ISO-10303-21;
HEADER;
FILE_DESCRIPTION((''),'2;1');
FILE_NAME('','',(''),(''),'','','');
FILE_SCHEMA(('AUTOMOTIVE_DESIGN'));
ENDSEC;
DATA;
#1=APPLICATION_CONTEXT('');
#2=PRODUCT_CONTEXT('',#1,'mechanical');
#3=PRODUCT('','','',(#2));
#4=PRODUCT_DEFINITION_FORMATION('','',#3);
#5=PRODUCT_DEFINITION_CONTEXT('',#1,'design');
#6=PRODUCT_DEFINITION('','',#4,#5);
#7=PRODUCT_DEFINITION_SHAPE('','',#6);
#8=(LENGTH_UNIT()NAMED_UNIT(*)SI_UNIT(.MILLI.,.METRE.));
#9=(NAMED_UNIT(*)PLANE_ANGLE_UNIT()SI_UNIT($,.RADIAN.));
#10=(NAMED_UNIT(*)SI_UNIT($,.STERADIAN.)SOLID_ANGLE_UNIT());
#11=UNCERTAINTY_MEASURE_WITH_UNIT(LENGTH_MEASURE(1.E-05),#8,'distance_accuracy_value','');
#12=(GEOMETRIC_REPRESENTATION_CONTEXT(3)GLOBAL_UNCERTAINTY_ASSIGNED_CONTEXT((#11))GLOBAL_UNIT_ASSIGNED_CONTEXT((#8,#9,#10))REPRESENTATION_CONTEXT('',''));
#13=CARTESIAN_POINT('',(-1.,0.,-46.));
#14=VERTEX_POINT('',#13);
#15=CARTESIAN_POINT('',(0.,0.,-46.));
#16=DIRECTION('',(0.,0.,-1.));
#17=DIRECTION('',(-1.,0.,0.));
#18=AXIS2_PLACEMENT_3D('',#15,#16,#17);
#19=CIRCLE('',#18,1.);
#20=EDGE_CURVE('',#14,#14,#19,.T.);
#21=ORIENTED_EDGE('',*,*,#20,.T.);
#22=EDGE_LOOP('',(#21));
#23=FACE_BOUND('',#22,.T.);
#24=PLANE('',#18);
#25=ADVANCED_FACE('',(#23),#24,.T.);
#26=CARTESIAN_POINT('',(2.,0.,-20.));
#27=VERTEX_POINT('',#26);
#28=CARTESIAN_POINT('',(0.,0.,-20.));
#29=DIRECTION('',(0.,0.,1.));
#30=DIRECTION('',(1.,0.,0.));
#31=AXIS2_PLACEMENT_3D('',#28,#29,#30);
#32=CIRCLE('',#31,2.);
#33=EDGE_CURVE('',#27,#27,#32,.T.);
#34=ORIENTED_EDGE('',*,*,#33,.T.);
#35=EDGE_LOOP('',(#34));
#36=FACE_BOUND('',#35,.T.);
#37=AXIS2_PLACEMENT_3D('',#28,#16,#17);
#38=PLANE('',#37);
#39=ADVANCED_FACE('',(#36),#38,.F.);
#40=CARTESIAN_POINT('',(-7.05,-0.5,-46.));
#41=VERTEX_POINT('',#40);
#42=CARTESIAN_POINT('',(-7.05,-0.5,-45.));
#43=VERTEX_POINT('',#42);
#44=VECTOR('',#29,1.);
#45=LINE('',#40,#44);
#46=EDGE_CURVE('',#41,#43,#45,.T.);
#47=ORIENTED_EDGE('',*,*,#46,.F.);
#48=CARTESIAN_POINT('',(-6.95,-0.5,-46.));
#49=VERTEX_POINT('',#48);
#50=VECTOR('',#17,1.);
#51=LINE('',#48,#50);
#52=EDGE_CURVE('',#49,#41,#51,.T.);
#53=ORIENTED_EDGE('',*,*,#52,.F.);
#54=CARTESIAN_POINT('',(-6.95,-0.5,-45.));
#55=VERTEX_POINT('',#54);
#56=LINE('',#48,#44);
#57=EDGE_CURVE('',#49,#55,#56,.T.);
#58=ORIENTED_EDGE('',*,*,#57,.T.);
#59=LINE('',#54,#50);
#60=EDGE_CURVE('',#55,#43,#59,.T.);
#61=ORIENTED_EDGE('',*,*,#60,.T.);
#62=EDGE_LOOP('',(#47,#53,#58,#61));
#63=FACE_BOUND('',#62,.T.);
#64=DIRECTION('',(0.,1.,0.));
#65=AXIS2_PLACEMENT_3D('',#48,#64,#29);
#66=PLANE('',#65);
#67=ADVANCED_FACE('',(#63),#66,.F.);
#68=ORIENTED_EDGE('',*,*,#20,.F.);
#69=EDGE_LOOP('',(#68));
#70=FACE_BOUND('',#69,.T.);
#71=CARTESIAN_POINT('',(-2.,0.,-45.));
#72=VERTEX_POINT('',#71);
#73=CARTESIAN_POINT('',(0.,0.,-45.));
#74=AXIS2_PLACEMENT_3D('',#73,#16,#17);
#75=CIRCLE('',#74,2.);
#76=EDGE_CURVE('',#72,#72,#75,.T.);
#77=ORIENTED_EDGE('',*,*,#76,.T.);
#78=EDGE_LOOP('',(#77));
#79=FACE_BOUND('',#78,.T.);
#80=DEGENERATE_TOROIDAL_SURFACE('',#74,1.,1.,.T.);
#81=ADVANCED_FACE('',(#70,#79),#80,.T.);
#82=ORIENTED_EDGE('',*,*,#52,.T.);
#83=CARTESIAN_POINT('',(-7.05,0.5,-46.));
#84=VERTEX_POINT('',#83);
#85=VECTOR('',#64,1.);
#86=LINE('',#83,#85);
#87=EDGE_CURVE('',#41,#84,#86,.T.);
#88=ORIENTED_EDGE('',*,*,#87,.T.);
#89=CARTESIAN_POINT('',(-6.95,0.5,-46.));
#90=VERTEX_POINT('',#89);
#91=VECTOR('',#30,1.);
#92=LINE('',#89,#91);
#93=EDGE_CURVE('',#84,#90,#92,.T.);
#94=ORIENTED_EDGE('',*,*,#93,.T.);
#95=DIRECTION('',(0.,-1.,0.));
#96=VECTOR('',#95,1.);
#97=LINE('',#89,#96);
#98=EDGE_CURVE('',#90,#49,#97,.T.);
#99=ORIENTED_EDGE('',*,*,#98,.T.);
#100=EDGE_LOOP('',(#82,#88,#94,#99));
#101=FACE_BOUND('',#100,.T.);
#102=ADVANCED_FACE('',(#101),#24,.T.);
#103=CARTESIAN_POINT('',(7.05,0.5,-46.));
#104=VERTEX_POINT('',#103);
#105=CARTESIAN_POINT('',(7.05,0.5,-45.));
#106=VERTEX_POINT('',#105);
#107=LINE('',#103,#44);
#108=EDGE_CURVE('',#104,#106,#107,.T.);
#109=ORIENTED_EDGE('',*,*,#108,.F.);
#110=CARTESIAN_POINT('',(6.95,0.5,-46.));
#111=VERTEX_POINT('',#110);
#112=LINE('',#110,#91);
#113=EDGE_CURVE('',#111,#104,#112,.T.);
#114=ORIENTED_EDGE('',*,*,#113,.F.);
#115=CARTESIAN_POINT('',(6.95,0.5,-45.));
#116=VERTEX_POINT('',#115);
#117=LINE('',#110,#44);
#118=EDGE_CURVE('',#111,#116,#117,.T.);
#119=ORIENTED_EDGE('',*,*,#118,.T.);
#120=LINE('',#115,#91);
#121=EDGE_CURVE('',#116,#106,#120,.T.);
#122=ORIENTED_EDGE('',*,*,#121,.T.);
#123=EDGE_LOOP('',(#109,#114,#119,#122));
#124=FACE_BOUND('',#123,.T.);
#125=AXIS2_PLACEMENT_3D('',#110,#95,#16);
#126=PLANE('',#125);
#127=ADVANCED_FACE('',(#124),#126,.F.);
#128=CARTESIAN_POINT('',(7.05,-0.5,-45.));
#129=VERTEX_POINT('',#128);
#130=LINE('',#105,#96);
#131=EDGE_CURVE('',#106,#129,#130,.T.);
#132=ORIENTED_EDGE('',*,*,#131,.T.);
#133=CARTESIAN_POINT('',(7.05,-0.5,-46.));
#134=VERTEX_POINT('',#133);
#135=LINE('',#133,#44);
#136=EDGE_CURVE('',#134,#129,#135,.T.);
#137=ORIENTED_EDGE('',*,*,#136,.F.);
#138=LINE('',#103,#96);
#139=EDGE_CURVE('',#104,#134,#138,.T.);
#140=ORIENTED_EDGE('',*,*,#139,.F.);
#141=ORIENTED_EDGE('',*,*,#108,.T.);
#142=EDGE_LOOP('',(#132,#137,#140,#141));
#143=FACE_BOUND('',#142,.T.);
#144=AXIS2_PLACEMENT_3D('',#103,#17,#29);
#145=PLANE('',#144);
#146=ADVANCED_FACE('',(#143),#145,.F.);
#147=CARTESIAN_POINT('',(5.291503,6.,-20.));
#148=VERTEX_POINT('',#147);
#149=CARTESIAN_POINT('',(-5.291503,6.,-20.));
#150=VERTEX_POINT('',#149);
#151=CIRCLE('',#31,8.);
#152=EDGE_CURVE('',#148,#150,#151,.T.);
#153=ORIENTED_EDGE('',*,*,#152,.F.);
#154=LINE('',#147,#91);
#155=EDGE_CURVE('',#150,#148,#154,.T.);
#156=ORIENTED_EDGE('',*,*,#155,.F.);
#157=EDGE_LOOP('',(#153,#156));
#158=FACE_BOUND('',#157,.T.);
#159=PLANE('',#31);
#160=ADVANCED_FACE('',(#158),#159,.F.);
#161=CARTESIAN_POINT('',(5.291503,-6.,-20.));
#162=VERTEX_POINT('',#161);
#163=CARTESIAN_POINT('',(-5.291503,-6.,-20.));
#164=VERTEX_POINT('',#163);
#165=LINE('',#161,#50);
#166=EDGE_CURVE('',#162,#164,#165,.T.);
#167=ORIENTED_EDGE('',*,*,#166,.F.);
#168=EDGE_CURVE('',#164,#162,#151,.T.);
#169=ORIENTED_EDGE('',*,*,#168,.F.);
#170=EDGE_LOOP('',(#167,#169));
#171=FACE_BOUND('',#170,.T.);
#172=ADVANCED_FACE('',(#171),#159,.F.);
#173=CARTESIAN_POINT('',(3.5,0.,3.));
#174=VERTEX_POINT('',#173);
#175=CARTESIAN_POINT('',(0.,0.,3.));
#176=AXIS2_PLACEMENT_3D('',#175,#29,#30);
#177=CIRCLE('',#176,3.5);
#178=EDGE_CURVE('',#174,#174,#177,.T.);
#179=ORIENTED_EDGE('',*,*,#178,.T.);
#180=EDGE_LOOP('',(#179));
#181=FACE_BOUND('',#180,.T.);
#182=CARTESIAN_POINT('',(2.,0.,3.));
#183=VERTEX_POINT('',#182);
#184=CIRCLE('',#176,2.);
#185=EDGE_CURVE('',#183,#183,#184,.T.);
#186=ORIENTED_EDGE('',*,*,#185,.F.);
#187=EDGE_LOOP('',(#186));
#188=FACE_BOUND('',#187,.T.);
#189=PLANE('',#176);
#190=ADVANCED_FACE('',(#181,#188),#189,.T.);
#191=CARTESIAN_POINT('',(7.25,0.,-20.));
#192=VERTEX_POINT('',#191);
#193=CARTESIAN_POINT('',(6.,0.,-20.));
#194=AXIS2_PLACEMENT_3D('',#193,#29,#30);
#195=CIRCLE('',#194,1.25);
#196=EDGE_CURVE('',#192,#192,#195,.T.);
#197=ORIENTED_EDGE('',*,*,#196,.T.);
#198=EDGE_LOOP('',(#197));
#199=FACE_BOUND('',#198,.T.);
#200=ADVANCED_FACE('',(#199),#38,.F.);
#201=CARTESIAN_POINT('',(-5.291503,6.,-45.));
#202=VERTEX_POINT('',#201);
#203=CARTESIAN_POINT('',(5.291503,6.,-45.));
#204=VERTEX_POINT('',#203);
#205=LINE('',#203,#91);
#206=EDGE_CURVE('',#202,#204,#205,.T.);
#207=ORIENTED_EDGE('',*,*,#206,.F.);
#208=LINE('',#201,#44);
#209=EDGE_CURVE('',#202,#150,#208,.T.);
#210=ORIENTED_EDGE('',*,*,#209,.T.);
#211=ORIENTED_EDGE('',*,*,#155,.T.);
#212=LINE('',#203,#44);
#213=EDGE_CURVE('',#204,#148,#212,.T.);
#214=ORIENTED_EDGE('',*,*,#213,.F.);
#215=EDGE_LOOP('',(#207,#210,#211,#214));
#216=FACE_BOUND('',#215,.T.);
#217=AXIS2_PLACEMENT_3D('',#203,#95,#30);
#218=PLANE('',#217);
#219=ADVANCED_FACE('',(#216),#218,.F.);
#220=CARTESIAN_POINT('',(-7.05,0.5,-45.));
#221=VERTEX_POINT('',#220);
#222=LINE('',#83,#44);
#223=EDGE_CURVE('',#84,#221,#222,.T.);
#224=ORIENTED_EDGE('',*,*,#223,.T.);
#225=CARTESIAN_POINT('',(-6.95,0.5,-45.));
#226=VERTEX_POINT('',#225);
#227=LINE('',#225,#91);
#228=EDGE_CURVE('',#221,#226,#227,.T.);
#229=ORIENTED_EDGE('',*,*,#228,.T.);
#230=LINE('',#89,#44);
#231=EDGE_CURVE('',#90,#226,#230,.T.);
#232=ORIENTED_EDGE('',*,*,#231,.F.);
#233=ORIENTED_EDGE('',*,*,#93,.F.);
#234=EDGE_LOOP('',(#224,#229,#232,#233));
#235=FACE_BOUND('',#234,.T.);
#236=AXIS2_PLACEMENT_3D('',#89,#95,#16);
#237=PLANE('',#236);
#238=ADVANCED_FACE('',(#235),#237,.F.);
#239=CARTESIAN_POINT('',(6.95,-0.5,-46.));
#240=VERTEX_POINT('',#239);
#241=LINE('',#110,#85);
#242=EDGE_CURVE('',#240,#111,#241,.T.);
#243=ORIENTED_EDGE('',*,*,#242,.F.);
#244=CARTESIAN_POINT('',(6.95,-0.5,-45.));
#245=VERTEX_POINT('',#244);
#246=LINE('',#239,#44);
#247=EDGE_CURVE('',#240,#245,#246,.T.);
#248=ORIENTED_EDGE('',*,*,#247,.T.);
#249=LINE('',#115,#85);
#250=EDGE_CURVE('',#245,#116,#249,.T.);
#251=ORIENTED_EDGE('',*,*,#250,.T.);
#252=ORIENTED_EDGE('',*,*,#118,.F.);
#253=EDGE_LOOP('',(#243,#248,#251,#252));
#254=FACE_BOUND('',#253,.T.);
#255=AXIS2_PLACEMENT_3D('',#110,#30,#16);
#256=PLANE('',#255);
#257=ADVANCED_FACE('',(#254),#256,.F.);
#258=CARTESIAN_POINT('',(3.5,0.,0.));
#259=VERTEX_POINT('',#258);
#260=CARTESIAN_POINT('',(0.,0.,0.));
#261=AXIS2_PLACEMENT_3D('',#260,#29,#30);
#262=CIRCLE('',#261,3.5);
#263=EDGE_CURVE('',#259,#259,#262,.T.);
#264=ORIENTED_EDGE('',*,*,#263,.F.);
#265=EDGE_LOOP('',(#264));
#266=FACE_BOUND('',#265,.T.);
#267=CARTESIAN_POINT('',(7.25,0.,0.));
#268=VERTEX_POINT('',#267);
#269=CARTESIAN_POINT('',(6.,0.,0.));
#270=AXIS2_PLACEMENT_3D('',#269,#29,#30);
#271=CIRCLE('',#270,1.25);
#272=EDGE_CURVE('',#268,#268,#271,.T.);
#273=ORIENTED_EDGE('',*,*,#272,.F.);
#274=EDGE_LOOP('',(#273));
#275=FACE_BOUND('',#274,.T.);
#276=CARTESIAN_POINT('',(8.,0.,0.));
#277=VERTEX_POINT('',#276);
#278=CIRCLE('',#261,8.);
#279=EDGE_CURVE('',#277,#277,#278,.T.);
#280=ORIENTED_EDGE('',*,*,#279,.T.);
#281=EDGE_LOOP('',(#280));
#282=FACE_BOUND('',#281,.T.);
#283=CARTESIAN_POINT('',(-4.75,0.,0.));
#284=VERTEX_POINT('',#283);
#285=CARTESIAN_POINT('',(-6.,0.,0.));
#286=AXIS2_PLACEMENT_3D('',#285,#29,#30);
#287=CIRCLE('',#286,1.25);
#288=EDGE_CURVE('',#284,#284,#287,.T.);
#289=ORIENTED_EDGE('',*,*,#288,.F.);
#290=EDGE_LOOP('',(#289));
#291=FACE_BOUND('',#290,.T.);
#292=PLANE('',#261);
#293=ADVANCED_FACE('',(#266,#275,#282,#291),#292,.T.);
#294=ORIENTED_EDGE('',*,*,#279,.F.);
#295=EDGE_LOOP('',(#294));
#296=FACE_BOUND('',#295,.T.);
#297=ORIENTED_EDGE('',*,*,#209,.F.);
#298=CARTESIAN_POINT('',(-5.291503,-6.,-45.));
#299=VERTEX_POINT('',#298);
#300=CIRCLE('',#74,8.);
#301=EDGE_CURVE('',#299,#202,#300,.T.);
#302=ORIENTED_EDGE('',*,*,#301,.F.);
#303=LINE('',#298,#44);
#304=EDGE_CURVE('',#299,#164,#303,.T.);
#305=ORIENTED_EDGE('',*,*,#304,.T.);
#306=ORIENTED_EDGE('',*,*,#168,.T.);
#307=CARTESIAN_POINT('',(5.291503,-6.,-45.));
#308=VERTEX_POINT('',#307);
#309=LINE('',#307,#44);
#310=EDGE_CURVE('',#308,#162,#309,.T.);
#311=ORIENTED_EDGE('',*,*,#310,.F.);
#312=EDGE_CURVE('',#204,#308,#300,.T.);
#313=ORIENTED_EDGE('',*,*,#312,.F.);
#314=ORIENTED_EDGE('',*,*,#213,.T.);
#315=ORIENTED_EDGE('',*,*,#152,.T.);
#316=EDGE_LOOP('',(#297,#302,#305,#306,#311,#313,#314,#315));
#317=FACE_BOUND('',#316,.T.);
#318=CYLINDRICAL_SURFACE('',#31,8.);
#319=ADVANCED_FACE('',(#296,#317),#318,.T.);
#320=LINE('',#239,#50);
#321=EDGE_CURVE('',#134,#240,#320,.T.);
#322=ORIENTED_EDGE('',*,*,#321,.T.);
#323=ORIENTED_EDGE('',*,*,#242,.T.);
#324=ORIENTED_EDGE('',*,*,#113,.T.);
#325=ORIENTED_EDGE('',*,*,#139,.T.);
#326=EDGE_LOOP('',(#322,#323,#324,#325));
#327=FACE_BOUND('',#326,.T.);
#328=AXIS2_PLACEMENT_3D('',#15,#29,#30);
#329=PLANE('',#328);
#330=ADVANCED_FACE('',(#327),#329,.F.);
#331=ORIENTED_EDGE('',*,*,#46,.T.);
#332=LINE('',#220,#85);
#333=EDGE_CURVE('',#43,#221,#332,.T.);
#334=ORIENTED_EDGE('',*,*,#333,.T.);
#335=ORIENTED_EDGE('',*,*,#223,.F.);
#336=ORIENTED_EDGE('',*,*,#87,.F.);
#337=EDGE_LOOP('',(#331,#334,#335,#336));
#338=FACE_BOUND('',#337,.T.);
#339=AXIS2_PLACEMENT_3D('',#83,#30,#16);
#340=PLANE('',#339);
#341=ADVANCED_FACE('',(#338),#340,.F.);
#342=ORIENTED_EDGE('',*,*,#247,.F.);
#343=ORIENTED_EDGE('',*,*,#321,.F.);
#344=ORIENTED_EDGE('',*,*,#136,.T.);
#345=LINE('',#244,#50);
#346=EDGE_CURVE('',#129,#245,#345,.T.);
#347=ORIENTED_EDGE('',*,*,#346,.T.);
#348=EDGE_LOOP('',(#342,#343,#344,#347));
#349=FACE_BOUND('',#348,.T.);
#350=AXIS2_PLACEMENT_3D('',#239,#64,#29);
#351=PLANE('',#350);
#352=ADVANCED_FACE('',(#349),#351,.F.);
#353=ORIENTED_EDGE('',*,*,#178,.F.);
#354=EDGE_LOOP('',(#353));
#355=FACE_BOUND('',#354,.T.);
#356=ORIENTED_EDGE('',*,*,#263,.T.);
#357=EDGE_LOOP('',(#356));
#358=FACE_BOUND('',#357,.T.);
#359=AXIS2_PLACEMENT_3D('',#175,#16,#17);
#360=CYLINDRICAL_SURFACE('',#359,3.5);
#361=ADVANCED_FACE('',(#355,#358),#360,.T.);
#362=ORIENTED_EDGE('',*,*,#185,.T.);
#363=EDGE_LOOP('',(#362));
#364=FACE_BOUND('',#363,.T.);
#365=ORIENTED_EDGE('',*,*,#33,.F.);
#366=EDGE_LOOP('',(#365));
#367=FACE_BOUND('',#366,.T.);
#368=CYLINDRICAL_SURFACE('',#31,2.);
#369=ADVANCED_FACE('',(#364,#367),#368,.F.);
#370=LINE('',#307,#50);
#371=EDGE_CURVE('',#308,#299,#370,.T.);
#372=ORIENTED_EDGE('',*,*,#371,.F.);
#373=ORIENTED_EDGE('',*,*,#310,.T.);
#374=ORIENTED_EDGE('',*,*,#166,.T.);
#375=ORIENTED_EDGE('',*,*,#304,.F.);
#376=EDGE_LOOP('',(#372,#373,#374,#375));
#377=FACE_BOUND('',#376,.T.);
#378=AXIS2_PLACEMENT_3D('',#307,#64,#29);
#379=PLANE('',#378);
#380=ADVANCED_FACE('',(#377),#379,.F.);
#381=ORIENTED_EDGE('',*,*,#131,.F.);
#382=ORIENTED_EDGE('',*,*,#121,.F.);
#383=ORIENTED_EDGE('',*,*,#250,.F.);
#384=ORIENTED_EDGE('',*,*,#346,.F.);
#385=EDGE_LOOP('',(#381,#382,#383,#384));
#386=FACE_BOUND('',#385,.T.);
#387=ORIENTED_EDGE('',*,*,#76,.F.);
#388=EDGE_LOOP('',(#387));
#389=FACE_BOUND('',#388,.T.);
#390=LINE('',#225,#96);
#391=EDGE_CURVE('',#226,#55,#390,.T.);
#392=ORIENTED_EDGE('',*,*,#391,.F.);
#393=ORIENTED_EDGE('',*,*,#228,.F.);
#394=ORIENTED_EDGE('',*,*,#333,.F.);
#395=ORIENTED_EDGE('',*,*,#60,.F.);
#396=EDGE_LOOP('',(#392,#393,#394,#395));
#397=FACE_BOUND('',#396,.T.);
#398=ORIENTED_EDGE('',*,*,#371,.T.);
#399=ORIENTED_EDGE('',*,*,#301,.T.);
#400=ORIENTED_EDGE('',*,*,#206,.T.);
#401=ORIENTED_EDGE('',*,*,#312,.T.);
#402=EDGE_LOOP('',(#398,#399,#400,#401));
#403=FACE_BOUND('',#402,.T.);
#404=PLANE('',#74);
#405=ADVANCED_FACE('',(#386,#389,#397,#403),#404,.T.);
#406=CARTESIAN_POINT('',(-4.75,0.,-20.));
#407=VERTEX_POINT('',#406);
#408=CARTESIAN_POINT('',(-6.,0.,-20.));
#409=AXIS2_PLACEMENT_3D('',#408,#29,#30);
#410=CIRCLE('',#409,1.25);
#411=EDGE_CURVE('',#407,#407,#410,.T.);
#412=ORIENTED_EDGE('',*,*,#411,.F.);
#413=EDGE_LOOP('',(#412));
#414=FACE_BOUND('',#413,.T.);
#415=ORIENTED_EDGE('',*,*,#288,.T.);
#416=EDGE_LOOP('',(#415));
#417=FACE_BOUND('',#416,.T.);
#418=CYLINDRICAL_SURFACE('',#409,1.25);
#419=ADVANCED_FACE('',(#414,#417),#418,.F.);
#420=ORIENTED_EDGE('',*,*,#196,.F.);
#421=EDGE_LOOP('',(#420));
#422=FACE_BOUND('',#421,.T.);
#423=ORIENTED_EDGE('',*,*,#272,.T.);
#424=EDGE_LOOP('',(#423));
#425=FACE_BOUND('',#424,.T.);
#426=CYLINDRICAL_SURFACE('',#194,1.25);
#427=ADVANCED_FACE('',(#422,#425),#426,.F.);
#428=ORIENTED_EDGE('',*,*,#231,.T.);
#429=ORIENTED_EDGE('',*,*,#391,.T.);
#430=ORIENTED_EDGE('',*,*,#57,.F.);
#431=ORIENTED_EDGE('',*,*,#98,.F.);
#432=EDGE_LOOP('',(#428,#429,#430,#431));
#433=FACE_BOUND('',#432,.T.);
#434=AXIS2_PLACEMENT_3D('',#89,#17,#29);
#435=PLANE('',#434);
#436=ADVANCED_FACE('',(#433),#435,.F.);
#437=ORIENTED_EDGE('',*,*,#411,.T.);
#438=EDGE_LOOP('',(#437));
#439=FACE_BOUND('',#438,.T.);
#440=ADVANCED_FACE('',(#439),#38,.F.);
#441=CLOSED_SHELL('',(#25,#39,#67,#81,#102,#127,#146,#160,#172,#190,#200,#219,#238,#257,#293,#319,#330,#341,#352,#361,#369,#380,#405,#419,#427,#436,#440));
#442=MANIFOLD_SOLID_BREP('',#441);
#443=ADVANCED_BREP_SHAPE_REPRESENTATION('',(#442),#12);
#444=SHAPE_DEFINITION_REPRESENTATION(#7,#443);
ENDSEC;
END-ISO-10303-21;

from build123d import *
from build123d.topology import SkipClean

# Parameters (mm, degrees)
SKETCH1_R           = 8
SKETCH1_R_2         = 2
SKETCH1_R_3         = 1.25
BOSS_EXTRUDE1_DEPTH = 20
BOSS_EXTRUDE2_START = 3
BOSS_EXTRUDE2_DEPTH = 3
BOSS_EXTRUDE3_DEPTH = 25
SKETCH3_R           = 2
SKETCH3_W           = 0.1
SKETCH3_H           = 1
BOSS_EXTRUDE5_DEPTH = 1
FILLET2_R           = 1


with BuildPart() as part:
    # Sketch1 → Boss-Extrude1 (new body)
    with BuildSketch(Plane.XY):
        Circle(SKETCH1_R)
        Circle(SKETCH1_R_2, mode=Mode.SUBTRACT)
        with Locations((-6, 0)):
            Circle(SKETCH1_R_3, mode=Mode.SUBTRACT)
        with Locations((6, 0)):
            Circle(SKETCH1_R_3, mode=Mode.SUBTRACT)
    extrude(amount=-BOSS_EXTRUDE1_DEPTH)

    # Sketch1<3> → Boss-Extrude2 (add)
    with SkipClean():  # the faces are left unmerged after this step: merging them gives an invalid solid
        with BuildSketch(Plane.XY.offset(BOSS_EXTRUDE2_START)):
            with BuildLine():
                ThreePointArc((-2, 0), (0, 2), (2, 0))
                Line((2, 0), (3.5, 0))
                ThreePointArc((3.5, 0), (0, 3.5), (-3.5, 0))
                Line((-3.5, 0), (-2, 0))
            make_face()
            with BuildLine():
                Line((3.5, 0), (2, 0))
                ThreePointArc((2, 0), (0, -2), (-2, 0))
                Line((-2, 0), (-3.5, 0))
                ThreePointArc((-3.5, 0), (0, -3.5), (3.5, 0))
            make_face()
        extrude(amount=-BOSS_EXTRUDE2_DEPTH)

    # Sketch2 → Boss-Extrude3 (add)
    with SkipClean():  # the faces are left unmerged after this step: merging them gives an invalid solid
        with BuildSketch(Plane(origin=(0, 0, -20), x_dir=(-1, 0, 0), z_dir=(0, 0, -1))):
            with BuildLine():
                Line((-5.291502622, 6), (5.291502622, 6))
                ThreePointArc((5.291502622, 6), (8, 0), (5.291502622, -6))
                Line((5.291502622, -6), (-5.291502622, -6))
                ThreePointArc((-5.291502622, -6), (-8, 0), (-5.291502622, 6))
            make_face()
        extrude(amount=BOSS_EXTRUDE3_DEPTH)

    # Sketch3 → Boss-Extrude5 (add)
    with SkipClean():  # the faces are left unmerged after this step: merging them gives an invalid solid
        with BuildSketch(Plane(origin=(0, 0, -45), x_dir=(-1, 0, 0), z_dir=(0, 0, -1))):
            with Locations(Location((0, 0, 0), (0, 0, 180))):
                Circle(SKETCH3_R)
            with Locations((7, 0)):
                Rectangle(SKETCH3_W, SKETCH3_H)
            with Locations((-7, 0)):
                Rectangle(SKETCH3_W, SKETCH3_H)
        extrude(amount=BOSS_EXTRUDE5_DEPTH)

    # Fillet2
    fillet2_edges = [part.edges().sort_by_distance(p)[0] for p in [
        (-2, 0, -46),
    ]]
    fillet(fillet2_edges, radius=FILLET2_R - 0.0001)  # a hair under: the kernel refuses the full size


solid = part.part
